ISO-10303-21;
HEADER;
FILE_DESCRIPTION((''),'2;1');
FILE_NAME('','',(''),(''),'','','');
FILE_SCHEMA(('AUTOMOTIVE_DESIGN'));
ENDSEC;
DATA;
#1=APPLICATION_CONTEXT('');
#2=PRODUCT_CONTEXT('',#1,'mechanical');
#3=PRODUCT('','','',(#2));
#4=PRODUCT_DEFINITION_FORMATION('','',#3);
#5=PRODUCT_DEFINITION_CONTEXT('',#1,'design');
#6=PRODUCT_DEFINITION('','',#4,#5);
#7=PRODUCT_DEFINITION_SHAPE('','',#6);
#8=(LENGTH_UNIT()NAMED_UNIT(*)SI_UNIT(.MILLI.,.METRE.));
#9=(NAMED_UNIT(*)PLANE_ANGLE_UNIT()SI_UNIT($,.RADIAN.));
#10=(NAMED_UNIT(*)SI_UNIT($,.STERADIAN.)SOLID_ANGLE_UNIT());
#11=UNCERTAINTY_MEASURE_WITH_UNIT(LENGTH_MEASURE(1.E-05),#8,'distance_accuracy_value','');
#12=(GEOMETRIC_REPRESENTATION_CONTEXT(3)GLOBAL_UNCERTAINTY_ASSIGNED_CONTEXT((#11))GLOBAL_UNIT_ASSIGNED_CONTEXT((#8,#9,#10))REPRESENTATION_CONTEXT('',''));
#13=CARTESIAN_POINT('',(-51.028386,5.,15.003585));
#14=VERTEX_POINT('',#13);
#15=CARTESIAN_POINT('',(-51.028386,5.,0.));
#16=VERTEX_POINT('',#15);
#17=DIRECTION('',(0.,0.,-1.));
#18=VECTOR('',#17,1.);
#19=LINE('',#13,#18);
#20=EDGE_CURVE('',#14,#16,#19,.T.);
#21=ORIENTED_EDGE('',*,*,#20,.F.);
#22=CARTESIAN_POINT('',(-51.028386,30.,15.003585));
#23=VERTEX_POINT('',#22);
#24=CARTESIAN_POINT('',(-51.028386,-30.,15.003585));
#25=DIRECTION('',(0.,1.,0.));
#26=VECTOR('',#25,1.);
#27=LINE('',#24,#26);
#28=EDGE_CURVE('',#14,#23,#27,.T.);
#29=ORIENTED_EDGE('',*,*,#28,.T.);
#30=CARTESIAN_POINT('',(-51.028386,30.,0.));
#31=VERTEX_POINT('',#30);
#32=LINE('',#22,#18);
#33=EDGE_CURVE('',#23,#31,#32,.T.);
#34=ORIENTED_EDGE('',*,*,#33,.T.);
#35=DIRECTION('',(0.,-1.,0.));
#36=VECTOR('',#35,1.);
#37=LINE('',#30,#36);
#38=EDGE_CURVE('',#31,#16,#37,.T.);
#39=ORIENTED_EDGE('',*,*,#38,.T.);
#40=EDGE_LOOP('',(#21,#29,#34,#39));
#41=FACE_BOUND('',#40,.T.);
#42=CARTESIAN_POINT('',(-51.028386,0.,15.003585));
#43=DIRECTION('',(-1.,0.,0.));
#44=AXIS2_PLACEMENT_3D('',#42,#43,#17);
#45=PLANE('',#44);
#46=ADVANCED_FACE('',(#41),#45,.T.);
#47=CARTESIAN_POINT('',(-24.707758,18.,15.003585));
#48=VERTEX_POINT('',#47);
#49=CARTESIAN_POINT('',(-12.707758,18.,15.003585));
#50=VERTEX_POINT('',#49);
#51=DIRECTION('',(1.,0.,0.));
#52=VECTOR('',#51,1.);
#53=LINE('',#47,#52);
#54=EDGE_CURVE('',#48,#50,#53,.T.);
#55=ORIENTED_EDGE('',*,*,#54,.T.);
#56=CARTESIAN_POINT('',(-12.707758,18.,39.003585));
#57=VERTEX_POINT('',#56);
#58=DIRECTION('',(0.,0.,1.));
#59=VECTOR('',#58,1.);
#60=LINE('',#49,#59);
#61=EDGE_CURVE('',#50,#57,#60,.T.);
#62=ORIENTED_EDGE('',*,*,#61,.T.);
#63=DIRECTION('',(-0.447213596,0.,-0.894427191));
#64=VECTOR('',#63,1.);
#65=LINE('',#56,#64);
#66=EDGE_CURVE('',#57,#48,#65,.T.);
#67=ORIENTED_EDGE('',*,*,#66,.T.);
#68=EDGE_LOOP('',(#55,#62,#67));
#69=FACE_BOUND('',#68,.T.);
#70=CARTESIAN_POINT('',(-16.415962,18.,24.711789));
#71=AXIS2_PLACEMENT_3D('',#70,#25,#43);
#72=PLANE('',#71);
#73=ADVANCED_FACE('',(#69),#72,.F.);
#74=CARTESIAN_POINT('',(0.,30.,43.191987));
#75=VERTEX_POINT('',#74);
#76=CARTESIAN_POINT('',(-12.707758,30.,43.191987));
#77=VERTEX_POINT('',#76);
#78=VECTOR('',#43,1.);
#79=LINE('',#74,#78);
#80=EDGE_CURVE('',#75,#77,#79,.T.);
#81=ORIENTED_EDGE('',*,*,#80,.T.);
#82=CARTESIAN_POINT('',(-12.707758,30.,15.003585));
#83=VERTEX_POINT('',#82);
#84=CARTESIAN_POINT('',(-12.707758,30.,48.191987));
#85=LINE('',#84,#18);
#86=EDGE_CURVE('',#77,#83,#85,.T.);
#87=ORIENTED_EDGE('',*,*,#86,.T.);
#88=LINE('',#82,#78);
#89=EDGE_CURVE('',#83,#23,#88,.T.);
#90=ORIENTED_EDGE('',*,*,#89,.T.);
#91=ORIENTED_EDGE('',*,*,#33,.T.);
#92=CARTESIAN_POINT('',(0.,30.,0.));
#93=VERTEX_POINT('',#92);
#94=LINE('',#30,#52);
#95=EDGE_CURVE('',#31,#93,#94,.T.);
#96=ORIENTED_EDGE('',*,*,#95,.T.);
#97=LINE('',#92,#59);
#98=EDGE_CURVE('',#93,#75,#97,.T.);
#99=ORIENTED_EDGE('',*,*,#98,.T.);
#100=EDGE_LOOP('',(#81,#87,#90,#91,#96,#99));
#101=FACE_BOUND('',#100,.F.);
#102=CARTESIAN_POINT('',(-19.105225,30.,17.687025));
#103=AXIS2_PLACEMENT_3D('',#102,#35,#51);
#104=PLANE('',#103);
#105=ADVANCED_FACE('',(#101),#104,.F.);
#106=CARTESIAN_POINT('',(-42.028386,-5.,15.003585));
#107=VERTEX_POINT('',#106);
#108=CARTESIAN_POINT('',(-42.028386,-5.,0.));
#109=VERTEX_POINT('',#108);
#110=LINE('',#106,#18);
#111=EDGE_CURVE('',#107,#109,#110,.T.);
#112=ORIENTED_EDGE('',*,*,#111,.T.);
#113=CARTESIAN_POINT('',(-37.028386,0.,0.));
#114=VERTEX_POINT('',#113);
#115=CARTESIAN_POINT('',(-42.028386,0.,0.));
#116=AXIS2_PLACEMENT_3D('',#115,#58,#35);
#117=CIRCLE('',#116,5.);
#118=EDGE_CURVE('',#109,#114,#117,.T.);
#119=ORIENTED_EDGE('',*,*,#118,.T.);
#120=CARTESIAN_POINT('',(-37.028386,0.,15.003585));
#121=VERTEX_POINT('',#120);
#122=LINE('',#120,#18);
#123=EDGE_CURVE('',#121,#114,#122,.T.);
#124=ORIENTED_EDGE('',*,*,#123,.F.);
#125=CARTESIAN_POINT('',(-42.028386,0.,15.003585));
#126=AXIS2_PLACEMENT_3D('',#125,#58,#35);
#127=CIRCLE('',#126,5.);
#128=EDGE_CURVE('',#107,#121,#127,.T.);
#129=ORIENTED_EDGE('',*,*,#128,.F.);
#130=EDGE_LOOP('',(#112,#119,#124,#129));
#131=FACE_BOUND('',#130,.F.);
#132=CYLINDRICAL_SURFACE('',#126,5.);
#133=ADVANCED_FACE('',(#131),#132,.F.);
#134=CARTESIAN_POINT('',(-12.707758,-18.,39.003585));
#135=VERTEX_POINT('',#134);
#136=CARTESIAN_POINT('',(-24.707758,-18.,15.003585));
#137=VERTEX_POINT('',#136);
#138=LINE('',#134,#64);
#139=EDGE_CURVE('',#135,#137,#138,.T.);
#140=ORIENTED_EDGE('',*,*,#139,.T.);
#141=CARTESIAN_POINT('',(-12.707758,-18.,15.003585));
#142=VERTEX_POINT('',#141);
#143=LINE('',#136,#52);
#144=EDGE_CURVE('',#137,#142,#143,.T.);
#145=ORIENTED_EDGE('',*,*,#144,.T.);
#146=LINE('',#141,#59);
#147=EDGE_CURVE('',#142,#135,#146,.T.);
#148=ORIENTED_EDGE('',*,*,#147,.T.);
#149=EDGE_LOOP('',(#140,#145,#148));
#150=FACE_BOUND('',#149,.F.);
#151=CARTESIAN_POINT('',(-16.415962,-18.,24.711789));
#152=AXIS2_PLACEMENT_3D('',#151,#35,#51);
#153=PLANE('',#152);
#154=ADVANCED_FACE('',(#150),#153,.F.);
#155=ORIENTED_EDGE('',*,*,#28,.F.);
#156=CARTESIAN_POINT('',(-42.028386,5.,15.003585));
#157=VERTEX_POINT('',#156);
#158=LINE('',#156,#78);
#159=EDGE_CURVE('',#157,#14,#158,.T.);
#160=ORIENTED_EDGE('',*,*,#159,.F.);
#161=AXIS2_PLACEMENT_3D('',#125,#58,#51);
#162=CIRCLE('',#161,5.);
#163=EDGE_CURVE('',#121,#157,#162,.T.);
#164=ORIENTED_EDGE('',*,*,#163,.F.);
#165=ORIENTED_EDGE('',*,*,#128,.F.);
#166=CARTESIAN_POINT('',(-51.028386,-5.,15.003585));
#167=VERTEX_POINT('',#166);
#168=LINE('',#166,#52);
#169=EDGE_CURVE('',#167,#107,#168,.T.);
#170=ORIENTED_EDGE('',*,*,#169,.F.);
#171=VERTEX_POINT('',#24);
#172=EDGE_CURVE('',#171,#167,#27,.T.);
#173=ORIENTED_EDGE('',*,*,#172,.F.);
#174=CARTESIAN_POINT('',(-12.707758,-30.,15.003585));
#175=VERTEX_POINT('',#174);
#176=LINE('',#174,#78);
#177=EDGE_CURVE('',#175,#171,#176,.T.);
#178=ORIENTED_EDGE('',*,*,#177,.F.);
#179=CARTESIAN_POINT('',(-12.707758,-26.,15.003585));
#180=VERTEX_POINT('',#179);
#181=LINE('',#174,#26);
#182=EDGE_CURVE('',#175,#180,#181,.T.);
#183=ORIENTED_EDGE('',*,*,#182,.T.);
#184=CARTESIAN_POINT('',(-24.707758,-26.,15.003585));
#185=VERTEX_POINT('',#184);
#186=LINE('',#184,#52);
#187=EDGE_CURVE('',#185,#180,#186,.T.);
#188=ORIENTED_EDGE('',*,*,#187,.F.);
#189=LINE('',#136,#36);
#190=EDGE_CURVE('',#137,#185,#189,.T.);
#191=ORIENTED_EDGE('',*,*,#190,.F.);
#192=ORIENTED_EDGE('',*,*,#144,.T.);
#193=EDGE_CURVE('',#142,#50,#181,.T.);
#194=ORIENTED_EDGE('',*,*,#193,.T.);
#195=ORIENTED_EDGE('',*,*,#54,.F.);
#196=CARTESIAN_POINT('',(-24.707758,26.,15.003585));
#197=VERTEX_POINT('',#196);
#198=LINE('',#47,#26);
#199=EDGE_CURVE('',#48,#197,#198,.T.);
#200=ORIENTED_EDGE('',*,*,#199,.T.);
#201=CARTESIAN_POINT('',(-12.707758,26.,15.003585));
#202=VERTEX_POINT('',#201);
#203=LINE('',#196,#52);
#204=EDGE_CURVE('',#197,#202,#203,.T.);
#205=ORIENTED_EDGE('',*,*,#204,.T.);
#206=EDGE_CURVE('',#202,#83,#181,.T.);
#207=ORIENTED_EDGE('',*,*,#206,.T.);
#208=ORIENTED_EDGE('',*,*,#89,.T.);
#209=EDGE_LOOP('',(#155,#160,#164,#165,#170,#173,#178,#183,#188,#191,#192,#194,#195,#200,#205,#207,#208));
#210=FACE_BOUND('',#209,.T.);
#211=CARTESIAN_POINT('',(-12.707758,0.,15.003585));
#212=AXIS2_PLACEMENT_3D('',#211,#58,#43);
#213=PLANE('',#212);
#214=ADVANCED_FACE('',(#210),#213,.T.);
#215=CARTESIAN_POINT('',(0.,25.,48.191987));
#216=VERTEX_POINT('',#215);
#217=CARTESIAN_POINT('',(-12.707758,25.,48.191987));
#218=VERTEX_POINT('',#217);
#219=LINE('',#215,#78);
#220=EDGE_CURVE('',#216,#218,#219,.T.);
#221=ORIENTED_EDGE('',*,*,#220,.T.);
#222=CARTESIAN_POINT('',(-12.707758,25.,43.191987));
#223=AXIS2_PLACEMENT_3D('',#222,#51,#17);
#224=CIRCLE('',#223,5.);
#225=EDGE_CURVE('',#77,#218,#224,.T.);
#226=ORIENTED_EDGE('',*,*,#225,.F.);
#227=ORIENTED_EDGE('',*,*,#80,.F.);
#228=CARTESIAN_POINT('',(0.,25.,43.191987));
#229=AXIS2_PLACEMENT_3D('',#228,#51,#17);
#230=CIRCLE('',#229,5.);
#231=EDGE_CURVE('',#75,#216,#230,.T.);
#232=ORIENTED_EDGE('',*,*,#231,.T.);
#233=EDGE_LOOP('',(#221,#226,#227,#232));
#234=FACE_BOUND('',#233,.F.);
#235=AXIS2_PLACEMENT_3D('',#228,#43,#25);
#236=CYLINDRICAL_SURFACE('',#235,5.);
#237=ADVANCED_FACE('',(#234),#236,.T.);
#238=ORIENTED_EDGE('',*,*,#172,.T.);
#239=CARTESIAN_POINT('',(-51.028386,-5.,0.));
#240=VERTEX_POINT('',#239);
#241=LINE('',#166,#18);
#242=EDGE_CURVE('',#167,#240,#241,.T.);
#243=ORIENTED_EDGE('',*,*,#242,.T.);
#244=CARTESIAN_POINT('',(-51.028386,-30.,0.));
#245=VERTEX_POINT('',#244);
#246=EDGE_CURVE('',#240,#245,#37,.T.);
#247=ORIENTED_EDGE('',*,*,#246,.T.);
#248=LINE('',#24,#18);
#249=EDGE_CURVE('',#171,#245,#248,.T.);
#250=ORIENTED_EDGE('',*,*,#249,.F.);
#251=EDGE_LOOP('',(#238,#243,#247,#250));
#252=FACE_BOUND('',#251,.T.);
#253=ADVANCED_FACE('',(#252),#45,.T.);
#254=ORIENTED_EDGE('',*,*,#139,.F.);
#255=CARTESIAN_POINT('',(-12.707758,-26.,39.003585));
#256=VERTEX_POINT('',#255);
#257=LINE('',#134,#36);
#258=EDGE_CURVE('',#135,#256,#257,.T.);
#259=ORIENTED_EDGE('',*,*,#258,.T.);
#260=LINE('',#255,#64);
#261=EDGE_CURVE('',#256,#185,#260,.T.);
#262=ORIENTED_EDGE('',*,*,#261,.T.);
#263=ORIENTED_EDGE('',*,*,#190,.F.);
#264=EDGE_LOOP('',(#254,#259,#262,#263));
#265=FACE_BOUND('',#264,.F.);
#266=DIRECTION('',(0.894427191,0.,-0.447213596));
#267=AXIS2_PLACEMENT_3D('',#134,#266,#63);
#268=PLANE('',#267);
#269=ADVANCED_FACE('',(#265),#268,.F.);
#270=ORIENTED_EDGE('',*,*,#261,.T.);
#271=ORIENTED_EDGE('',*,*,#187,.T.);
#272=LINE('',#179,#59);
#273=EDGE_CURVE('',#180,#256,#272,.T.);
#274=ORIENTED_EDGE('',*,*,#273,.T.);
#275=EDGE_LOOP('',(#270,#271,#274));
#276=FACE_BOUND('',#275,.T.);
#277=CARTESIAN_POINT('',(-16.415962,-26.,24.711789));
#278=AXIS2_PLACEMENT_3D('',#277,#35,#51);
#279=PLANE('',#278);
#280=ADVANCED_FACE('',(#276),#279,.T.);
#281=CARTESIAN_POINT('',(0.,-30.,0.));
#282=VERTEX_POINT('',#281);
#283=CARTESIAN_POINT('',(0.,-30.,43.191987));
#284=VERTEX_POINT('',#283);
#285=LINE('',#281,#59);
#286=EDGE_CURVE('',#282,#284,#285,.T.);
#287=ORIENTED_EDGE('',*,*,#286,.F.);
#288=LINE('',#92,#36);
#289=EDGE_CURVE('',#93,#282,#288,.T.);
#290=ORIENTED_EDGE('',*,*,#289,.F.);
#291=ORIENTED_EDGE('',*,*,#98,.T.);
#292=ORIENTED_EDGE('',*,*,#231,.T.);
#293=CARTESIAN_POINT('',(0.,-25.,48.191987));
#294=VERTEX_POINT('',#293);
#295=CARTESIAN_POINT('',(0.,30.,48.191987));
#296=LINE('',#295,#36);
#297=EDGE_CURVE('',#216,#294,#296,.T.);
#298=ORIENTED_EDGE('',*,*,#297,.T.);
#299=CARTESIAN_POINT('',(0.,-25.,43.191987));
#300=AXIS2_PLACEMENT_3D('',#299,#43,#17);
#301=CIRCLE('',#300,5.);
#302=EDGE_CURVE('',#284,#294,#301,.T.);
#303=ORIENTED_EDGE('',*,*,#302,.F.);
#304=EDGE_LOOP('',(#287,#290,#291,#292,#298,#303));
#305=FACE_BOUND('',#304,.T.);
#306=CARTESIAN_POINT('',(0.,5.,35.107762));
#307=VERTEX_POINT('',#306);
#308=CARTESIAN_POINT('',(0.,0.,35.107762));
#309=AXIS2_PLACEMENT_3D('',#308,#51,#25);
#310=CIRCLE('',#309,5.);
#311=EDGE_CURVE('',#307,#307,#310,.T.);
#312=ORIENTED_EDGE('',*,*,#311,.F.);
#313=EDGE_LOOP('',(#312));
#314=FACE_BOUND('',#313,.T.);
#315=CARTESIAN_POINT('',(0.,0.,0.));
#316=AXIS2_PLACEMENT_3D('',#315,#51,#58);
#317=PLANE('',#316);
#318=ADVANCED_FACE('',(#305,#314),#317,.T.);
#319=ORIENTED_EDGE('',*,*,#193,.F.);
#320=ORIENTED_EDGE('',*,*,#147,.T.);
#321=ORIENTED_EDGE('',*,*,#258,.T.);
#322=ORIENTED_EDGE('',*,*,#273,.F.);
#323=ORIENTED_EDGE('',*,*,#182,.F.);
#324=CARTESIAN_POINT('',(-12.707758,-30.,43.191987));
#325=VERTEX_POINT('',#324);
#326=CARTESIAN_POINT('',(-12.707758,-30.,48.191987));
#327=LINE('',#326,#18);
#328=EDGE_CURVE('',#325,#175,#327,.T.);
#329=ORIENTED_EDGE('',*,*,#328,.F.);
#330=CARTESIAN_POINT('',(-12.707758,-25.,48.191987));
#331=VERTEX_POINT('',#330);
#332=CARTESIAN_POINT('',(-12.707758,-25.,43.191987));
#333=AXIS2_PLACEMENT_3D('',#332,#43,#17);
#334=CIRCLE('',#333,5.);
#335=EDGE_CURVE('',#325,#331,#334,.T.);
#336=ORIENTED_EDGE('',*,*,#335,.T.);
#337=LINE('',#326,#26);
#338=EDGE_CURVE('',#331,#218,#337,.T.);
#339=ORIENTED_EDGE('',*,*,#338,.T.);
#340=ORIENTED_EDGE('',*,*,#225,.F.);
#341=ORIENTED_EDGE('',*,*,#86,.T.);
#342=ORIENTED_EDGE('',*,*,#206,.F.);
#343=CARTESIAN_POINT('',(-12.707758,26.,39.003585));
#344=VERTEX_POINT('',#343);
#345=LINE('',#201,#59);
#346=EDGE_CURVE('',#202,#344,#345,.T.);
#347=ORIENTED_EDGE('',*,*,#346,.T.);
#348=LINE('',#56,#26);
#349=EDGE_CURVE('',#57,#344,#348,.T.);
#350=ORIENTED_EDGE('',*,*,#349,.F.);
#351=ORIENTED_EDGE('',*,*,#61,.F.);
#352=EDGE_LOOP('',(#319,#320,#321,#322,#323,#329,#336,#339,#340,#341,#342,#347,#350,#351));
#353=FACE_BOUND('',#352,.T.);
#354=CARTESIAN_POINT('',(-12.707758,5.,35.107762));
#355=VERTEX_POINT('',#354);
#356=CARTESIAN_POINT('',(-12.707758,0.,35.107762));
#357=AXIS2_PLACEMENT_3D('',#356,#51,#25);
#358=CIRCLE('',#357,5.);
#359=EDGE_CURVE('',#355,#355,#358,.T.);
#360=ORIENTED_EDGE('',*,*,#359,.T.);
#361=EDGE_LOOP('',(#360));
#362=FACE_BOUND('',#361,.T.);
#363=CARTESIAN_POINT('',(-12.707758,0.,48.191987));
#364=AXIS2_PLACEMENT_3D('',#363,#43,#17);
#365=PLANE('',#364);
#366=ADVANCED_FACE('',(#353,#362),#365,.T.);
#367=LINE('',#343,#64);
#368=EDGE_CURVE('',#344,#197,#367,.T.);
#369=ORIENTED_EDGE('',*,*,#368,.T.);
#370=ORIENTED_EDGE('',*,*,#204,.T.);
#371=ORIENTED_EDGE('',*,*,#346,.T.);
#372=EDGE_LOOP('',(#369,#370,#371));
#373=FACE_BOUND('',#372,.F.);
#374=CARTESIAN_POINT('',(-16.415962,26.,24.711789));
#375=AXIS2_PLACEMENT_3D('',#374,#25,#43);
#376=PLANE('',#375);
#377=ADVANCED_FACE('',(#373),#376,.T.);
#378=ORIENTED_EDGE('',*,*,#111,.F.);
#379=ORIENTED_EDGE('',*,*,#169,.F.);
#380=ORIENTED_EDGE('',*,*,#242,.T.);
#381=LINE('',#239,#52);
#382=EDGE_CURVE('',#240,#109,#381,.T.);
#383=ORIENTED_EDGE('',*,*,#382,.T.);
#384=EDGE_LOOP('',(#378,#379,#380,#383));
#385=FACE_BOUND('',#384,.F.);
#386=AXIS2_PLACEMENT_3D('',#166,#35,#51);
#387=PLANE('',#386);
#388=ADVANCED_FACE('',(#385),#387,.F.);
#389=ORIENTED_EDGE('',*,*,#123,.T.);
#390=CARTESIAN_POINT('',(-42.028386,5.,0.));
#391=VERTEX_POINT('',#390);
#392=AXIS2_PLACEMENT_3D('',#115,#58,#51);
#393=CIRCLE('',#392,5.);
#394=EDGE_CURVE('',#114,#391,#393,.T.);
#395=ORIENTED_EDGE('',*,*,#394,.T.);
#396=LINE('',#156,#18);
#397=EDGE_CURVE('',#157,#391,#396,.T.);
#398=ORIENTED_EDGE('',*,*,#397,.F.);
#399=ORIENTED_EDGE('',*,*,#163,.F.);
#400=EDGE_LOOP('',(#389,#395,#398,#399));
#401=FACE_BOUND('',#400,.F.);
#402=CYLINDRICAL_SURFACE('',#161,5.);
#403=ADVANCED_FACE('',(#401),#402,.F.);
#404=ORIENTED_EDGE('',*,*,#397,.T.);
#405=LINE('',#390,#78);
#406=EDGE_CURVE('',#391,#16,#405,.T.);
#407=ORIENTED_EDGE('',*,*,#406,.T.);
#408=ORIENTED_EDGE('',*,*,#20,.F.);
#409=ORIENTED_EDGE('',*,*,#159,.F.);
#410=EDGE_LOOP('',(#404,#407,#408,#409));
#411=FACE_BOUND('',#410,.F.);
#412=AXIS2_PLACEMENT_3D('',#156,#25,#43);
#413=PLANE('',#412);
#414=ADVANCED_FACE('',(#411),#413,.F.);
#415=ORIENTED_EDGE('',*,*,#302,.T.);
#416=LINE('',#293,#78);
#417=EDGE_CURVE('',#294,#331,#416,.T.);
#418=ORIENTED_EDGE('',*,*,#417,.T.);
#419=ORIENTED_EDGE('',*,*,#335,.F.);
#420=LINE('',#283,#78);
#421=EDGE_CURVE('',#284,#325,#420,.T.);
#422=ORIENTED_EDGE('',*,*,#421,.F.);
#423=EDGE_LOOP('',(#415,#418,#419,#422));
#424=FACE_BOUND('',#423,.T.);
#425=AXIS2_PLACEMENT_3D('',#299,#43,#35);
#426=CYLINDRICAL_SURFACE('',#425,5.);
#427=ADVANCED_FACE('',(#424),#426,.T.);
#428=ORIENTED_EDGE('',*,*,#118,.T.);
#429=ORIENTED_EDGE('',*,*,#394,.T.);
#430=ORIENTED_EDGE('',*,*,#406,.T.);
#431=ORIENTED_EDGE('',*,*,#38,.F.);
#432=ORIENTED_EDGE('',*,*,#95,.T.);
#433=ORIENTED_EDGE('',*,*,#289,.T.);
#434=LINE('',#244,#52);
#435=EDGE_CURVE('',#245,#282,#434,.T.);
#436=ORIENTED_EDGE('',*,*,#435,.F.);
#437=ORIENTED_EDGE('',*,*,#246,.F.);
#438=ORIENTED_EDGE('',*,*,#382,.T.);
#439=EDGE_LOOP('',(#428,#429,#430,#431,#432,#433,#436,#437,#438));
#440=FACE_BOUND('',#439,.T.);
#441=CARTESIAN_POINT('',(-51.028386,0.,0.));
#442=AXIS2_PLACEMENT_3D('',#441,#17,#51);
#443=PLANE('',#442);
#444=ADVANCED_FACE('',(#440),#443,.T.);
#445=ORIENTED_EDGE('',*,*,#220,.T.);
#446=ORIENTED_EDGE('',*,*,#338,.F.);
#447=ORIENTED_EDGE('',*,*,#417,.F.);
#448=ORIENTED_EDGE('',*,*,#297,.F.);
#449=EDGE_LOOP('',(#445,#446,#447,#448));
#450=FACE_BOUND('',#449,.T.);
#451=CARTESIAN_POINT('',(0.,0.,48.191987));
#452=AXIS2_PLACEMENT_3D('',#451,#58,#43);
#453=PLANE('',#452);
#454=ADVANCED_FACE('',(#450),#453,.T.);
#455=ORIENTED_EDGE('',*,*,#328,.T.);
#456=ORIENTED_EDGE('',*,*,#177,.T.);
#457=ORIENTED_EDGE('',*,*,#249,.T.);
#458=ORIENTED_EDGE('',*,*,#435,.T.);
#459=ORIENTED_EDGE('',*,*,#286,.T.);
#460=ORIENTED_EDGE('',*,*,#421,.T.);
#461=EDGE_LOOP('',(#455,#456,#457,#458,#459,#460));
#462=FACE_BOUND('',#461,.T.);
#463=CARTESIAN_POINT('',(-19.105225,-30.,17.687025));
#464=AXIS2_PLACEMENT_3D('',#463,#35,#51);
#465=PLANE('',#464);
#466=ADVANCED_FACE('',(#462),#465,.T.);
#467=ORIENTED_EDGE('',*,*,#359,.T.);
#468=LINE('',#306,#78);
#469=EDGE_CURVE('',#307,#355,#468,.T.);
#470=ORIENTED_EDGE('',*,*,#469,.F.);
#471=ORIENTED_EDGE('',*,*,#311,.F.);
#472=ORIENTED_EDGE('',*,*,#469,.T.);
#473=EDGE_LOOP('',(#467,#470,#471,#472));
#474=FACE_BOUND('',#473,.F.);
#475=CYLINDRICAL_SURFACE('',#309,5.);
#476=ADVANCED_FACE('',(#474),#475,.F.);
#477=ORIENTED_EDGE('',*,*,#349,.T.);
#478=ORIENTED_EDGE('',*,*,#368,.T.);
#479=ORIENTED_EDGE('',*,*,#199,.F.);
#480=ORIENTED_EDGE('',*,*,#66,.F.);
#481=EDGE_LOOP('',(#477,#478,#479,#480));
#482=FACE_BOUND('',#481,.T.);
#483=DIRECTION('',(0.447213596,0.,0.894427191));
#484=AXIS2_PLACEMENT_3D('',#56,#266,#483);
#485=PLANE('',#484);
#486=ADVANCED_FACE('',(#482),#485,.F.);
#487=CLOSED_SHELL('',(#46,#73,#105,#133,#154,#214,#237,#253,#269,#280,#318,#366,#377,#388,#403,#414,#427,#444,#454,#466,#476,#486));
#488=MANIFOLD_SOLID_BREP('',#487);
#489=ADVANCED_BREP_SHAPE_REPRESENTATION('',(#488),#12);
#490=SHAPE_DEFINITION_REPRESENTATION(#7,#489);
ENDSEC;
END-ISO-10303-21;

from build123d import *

# Parameters (mm, degrees)
F1_DEPTH = 30
F2_R     = 5
F3_DEPTH = 12.7077577636
F5_DEPTH = 15.0035852566
F8_DEPTH = 8
F11_R    = 5


# Not quite as in the source:
# - a pattern or mirror of a feature is missing from the dataset's text; its kind, count and spacing are read off the source's solid
# - the program builds the solid bodies; features that only make, move or delete a surface that nothing else refers to are left out


with BuildPart() as f1:
    # F0 (on Front) → F1 (new body, symmetric)
    with BuildSketch(Plane.XZ):
        Polygon((-51.0283857584, 15.0035852566), (-51.0283857584, 0), (0, 0), (0, 48.1919869781), (-12.7077577636, 48.1919869781), (-12.7077577636, 15.0035852566), align=None)
    extrude(amount=F1_DEPTH, both=True)

    # F2 (on face) → F3 (cut, through all)
    with BuildSketch(Plane.YZ):
        with Locations((0, 35.1077616215)):
            Circle(F2_R)
    extrude(amount=-F3_DEPTH, mode=Mode.SUBTRACT)

    # F4 (on face) → F5 (cut, through all)
    with BuildSketch(Plane.XY.offset(15.0035852566)):
        with BuildLine():
            ThreePointArc((-42.0283857584, -5), (-38.4928518525, -3.5355339059), (-37.0283857584, 0))
            ThreePointArc((-37.0283857584, 0), (-38.4928518525, 3.5355339059), (-42.0283857584, 5))
            ThreePointArc((-42.0283857584, 5), (-47.0283857584, 0), (-42.0283857584, -5))
        make_face()
        with BuildLine():
            ThreePointArc((-42.0283857584, -5), (-47.0283857584, 0), (-42.0283857584, 5))
            Line((-42.0283857584, 5), (-51.0283857584, 5))
            Line((-51.0283857584, 5), (-51.0283857584, -5))
            Line((-51.0283857584, -5), (-42.0283857584, -5))
        make_face()
    extrude(amount=-F5_DEPTH, mode=Mode.SUBTRACT)

    # F7 (on offset) → F8 (join)
    with BuildSketch(Plane.XZ.offset(18)):
        Polygon((-12.7077577636, 39.0035852566), (-24.7077577636, 15.0035852566), (-12.7077577636, 15.0035852566), align=None)
    f8 = extrude(amount=F8_DEPTH)

    # F8_copies: F8 across plane
    add(f8.mirror(Plane.ZX))

    # F11
    f11_edges = [f1.edges().sort_by_distance(p)[0] for p in [
        (-6.353879, 30, 48.191987),
        (-6.353879, -30, 48.191987),
    ]]
    fillet(f11_edges, radius=F11_R)


solid = f1.part
